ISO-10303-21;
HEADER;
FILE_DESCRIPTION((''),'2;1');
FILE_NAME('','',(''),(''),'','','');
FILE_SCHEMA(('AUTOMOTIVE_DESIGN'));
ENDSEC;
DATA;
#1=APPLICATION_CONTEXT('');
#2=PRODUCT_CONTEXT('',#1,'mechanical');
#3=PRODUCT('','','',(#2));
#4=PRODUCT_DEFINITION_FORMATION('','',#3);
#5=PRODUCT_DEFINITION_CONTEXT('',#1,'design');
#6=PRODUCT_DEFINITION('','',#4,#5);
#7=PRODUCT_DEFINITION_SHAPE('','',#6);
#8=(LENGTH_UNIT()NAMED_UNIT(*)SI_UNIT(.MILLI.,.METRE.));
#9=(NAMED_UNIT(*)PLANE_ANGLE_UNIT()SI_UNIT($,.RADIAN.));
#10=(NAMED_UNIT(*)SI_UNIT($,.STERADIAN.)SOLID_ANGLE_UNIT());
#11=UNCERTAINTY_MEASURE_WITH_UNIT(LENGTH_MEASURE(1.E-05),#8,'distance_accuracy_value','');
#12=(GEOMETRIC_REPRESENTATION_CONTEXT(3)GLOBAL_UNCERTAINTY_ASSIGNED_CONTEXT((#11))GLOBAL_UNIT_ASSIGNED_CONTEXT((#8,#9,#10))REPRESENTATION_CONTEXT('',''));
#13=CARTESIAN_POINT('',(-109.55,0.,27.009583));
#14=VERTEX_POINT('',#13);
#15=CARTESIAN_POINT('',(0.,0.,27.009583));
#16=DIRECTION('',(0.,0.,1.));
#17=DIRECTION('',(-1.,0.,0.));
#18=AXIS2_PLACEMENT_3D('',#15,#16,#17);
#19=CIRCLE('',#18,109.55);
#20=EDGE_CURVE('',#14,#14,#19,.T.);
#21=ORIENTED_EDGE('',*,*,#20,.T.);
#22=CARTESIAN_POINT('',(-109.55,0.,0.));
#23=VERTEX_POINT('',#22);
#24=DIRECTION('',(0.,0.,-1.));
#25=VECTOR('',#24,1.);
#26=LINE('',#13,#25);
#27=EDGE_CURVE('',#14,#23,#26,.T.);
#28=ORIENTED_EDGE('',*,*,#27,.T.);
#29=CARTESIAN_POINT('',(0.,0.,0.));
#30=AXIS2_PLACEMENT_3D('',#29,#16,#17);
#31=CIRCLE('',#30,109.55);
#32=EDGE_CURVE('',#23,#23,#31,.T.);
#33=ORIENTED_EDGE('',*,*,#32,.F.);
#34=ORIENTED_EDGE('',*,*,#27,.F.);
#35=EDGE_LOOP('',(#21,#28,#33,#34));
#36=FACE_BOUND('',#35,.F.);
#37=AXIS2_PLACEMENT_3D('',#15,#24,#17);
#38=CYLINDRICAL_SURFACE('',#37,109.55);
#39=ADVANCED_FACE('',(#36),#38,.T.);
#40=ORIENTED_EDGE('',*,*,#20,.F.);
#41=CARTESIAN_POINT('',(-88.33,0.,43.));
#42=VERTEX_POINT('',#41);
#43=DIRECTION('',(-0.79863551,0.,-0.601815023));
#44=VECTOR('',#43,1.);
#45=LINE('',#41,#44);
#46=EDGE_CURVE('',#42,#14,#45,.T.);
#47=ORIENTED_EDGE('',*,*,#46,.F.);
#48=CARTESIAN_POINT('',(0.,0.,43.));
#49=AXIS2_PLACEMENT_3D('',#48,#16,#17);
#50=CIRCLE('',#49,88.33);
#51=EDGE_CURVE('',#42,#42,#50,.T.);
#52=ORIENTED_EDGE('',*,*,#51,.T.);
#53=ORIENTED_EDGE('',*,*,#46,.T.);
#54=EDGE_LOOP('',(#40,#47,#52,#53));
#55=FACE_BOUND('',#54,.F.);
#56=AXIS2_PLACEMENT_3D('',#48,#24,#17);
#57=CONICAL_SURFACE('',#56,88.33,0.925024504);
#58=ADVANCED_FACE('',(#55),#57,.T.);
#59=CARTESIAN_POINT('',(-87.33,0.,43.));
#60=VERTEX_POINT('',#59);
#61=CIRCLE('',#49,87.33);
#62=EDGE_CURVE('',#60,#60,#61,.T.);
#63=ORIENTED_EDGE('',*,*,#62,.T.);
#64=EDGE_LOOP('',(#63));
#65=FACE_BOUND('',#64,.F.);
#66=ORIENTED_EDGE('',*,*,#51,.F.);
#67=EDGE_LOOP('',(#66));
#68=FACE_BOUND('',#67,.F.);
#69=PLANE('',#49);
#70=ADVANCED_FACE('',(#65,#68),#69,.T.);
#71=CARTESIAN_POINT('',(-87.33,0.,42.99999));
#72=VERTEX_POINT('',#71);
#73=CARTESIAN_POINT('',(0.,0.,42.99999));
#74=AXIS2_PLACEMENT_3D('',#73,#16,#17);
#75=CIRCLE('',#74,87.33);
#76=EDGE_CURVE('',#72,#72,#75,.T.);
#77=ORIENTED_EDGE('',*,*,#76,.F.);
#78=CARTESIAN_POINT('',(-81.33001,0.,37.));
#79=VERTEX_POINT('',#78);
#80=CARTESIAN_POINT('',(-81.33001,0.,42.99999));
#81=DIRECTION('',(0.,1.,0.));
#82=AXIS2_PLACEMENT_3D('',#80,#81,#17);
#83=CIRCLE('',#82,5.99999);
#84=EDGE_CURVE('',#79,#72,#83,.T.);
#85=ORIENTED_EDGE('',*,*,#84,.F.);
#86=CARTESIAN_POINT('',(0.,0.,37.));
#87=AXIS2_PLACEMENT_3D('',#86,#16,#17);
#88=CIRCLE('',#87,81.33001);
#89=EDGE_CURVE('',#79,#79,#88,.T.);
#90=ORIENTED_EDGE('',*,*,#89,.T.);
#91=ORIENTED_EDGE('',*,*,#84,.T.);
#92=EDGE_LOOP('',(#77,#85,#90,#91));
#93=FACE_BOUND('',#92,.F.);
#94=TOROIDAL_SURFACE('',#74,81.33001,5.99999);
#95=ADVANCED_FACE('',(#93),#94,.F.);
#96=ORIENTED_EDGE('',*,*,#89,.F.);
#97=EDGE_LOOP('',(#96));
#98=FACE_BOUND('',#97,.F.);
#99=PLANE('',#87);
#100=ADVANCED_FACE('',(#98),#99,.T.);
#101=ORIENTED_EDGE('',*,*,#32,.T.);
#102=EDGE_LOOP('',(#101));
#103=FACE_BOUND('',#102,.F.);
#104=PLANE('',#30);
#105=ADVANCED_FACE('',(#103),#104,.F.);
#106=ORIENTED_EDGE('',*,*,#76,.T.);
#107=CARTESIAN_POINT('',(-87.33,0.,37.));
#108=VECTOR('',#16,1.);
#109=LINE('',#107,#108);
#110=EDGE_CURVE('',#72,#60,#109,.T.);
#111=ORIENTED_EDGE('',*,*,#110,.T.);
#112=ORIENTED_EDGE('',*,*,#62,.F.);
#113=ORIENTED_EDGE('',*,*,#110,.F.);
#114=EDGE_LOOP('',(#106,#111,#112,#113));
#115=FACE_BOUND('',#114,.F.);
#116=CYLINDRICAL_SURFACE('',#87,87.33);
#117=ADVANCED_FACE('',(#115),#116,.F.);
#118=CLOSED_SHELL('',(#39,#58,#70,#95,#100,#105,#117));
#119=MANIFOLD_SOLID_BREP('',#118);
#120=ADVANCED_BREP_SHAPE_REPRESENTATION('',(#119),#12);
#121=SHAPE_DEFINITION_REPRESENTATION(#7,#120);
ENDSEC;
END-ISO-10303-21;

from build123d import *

# Parameters (mm, degrees)
F2_R = 5.99999


# Not quite as in the source:
# - a fillet or chamfer is up to 0.001 mm smaller than in the source, because OpenCascade refuses the exact size


with BuildPart() as f1:
    # F0 (on Front) → F1 (revolve)
    with BuildSketch(Plane.XZ):
        Polygon((-109.55, 0), (0, 0), (0, 37), (-87.33, 37), (-87.33, 43), (-88.33, 43), (-109.55, 27.0095830568), align=None)
    revolve(axis=Axis((0, 0, 18.5), (0, 0, 1)))

    # F2 (radius 6 in the source; OpenCascade refuses exactly that, so slightly less here)
    f2_edges = [f1.edges().sort_by_distance(p)[0] for p in [
        (87.33, 0, 37),
    ]]
    fillet(f2_edges, radius=F2_R)


solid = f1.part
